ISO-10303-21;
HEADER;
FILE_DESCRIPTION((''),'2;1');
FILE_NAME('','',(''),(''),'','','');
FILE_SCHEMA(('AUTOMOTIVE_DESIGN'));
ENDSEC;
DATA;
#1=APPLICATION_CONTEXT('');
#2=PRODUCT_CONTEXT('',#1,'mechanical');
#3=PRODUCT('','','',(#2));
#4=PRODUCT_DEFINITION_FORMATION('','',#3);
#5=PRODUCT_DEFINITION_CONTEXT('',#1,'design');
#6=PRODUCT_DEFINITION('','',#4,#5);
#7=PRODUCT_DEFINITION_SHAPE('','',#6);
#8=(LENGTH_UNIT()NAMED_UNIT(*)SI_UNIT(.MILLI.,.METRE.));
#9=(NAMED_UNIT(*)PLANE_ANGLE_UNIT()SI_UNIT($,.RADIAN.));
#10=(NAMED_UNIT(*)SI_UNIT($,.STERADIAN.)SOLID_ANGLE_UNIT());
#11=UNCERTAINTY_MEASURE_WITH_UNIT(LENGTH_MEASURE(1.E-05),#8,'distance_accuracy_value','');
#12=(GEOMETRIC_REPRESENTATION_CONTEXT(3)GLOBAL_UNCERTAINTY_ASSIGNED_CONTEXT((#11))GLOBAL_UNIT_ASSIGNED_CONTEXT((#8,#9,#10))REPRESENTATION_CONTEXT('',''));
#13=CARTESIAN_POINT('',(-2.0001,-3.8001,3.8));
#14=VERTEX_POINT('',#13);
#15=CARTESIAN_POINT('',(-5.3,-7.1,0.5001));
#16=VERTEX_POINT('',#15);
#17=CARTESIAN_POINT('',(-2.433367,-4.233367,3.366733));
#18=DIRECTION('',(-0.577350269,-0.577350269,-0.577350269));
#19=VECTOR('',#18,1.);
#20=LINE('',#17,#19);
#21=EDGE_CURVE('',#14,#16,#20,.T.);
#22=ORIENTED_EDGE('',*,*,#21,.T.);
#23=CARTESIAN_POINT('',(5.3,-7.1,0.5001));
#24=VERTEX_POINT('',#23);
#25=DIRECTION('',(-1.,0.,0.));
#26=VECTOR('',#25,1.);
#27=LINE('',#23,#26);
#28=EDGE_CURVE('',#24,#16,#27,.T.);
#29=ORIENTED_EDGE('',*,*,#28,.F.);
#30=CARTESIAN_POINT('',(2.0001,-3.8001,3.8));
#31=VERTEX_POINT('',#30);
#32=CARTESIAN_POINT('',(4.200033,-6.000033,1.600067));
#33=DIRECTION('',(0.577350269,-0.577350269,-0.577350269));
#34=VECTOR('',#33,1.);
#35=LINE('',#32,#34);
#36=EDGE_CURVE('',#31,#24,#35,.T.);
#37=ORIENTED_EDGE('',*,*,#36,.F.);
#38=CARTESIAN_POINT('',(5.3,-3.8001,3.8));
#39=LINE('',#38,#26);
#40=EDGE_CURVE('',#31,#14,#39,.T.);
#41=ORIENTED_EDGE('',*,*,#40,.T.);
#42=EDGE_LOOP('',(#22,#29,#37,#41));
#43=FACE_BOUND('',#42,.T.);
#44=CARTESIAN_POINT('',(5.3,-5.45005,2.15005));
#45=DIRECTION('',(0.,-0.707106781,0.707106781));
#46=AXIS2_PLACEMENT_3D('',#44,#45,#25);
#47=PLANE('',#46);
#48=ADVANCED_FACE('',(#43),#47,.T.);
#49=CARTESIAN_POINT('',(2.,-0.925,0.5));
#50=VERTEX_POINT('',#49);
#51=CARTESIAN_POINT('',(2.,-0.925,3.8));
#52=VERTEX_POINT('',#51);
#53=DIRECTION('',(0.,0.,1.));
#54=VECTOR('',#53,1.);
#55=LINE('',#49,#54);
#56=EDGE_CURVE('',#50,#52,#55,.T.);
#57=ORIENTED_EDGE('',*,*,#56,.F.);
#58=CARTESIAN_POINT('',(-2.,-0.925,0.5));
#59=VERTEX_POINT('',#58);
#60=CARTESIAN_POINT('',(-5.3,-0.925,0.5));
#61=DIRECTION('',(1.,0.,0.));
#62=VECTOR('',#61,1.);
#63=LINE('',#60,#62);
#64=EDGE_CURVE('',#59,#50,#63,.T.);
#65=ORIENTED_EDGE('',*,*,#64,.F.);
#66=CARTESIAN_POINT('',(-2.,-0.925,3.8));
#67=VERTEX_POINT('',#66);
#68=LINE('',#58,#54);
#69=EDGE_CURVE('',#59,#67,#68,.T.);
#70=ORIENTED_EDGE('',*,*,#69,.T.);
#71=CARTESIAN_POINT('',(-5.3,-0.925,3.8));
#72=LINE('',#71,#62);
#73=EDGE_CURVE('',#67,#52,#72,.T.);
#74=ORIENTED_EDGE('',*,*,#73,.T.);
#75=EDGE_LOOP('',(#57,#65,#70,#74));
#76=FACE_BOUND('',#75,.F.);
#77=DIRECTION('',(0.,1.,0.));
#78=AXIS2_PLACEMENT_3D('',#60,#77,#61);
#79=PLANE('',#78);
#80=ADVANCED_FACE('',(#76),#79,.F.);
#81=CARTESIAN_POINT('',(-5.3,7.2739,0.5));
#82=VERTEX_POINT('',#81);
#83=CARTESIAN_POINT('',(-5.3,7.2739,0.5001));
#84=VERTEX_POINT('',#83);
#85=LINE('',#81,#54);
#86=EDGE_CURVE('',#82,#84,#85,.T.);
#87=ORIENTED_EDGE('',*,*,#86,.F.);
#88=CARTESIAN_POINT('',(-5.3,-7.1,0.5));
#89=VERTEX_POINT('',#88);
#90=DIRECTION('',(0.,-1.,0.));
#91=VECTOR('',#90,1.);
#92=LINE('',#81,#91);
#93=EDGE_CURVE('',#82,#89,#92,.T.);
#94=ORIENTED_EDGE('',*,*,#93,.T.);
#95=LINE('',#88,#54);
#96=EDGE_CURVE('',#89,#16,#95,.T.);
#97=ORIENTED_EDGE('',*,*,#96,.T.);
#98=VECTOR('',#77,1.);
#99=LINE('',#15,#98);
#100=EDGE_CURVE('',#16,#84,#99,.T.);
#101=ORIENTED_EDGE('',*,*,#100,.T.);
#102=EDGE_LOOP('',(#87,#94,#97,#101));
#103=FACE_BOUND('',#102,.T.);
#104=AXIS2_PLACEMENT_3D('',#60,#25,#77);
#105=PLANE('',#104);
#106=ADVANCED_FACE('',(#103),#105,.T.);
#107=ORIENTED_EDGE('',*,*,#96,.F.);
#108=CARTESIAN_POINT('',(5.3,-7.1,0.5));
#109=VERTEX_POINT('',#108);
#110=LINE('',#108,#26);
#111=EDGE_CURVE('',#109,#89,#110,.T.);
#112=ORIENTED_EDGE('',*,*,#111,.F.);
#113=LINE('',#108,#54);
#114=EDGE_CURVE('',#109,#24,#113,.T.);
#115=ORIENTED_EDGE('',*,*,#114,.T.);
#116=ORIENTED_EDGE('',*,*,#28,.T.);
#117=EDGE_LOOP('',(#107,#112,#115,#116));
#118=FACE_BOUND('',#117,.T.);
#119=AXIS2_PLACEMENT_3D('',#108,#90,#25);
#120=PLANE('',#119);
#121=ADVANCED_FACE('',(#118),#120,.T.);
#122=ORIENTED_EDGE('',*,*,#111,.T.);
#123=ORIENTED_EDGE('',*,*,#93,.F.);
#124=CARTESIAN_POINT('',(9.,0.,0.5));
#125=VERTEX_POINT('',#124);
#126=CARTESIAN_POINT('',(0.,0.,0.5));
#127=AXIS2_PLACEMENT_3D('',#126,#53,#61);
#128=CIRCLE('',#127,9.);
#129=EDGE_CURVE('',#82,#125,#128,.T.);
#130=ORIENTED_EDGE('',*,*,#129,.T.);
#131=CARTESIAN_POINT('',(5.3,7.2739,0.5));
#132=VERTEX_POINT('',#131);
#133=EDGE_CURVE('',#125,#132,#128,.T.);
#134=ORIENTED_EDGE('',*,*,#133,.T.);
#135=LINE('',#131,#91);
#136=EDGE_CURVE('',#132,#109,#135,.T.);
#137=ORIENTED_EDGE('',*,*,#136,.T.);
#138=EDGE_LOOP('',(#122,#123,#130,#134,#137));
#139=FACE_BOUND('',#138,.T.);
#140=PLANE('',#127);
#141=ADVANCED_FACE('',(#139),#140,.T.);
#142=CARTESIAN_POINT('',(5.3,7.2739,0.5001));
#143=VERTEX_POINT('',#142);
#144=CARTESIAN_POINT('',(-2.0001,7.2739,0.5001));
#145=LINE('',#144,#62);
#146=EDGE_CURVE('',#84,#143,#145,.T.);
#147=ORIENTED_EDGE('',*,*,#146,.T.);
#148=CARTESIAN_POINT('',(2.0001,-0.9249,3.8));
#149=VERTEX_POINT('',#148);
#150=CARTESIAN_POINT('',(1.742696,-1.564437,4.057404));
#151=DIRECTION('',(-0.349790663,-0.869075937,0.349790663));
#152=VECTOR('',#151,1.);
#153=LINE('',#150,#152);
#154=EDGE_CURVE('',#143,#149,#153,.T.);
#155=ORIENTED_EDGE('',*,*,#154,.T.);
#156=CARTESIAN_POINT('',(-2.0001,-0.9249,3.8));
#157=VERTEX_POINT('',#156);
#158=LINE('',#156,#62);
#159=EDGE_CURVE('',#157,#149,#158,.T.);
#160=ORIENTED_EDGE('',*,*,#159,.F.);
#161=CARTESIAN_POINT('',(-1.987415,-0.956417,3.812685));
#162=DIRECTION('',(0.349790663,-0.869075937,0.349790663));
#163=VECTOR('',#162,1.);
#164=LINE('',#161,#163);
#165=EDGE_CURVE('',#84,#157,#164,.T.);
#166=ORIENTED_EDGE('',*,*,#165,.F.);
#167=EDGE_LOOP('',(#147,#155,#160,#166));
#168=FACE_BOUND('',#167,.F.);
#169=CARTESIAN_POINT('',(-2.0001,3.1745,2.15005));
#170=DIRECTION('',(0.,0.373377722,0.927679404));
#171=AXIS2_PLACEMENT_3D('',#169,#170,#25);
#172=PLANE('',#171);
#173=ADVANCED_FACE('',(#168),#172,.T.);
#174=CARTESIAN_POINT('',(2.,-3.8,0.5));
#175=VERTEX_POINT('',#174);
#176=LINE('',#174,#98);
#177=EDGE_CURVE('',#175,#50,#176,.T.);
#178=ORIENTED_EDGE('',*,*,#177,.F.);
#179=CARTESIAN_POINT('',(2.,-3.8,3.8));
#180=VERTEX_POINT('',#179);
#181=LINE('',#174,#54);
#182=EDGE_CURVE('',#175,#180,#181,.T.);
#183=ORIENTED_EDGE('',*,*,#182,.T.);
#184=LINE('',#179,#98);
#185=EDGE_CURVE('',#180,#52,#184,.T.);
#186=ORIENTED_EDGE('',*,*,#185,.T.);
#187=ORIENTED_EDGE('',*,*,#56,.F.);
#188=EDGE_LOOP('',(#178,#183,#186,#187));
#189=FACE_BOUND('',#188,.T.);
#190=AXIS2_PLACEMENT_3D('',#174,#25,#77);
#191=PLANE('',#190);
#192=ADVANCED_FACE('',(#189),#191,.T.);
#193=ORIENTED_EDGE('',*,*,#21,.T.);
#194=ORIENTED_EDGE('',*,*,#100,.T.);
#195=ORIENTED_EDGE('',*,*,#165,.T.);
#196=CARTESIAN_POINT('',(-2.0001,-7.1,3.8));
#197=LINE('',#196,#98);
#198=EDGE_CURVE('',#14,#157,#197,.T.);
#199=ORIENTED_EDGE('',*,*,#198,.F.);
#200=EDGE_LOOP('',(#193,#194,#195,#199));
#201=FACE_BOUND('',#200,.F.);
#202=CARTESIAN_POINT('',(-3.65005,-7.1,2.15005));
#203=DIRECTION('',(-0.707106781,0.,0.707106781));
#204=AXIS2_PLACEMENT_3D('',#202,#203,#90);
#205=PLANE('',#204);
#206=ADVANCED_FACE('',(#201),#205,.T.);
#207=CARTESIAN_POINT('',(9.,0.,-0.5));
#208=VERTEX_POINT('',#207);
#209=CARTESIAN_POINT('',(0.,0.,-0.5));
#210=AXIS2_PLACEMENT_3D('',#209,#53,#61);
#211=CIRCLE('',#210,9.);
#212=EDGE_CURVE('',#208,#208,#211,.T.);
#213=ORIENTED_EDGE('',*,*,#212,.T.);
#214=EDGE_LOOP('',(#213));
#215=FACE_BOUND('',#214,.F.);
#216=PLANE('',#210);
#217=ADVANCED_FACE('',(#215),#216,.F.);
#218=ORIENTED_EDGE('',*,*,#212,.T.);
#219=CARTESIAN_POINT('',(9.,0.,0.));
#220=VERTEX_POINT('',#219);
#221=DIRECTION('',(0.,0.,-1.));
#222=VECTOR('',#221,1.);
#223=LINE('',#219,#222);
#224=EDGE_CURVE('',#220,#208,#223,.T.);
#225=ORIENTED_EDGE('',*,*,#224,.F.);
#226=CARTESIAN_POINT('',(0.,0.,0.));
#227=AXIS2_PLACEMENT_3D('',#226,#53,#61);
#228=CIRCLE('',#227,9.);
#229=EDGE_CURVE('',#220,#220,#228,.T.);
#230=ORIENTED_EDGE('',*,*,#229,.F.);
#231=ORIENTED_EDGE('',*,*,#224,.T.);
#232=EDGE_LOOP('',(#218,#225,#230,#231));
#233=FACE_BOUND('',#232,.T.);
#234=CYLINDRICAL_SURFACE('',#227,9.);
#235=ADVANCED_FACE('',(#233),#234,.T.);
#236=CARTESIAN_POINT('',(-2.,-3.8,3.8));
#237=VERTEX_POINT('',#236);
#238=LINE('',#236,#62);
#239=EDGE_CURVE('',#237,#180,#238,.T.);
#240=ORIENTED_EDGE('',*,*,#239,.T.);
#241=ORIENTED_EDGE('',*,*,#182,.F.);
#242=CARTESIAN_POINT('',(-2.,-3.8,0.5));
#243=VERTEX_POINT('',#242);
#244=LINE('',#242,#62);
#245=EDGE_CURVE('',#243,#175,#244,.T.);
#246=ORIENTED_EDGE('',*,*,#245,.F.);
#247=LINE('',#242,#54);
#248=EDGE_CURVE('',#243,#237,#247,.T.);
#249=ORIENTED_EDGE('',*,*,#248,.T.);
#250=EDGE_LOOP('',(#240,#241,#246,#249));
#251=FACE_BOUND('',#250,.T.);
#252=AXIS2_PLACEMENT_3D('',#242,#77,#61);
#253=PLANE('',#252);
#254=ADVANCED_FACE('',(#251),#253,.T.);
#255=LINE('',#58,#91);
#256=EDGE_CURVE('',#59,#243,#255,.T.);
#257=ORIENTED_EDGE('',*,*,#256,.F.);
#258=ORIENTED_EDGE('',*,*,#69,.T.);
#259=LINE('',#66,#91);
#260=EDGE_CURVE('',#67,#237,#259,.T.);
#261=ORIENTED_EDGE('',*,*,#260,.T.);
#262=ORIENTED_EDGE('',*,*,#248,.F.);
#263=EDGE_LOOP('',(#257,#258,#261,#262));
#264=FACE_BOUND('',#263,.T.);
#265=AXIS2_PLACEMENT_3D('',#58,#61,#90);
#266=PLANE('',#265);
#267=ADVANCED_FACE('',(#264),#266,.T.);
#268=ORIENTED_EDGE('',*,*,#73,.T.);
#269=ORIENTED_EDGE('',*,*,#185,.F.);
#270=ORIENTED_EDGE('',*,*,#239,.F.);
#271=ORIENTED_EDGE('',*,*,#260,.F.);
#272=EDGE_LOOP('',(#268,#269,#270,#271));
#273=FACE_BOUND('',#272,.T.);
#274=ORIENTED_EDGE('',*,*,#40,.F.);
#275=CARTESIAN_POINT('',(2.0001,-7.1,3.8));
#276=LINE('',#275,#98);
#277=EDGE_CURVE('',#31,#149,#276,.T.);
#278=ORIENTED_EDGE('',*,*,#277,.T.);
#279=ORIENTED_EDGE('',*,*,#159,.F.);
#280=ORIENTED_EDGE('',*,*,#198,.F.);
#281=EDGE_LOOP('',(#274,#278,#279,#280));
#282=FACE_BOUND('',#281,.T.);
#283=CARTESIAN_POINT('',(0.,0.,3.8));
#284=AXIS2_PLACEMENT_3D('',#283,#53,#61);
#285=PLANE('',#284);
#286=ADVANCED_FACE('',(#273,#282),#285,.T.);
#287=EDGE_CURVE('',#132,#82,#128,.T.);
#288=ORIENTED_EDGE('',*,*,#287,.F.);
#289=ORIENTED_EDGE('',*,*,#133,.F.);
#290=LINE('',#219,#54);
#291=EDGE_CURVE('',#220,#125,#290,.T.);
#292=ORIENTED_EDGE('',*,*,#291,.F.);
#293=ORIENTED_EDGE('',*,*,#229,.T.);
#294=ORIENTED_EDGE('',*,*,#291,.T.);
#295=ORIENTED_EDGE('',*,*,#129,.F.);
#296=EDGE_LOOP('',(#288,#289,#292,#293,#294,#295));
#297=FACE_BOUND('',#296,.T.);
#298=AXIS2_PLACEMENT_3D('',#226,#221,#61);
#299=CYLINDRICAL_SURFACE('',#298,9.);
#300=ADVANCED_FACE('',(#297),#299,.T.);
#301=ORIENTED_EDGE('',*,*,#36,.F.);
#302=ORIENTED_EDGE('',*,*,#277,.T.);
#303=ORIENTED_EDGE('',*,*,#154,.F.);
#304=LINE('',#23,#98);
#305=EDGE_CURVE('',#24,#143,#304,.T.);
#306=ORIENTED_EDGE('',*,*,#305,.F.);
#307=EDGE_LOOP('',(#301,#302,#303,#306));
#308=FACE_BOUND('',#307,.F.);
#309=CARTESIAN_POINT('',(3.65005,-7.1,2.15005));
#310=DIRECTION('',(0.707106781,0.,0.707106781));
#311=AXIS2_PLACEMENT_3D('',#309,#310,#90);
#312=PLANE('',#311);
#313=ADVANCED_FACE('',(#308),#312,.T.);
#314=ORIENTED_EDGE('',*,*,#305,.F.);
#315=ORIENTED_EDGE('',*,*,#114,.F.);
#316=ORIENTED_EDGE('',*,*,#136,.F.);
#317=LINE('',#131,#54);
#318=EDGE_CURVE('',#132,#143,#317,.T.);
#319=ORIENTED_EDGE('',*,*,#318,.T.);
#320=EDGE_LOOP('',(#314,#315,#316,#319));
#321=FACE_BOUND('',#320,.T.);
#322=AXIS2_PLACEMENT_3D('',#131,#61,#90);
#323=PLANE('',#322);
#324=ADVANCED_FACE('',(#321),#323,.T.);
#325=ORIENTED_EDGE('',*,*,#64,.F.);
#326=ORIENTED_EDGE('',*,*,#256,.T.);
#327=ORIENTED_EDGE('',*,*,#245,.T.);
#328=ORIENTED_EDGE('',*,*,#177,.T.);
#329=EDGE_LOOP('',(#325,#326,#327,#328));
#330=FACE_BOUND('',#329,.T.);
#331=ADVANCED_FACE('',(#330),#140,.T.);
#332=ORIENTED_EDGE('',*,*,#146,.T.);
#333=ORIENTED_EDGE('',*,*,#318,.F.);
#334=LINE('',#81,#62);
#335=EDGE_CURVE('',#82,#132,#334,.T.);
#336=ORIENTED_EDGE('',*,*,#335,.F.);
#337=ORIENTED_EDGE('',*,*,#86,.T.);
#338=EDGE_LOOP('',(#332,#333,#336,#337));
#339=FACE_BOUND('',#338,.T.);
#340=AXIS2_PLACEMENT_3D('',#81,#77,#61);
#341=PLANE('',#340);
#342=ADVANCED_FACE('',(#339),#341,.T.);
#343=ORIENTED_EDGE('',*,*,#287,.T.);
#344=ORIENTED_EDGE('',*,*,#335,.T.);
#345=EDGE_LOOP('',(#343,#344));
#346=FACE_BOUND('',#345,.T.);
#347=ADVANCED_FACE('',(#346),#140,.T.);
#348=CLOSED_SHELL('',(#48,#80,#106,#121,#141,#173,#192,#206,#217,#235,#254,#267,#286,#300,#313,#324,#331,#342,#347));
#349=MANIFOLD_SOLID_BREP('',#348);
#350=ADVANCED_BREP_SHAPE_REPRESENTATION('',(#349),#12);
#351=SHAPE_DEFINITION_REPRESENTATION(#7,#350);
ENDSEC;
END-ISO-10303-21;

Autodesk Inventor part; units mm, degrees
ref_plane "YZ Plane" through (0, 0, 0) normal (1, 0, 0) x (0, 1, 0)
ref_plane "XZ Plane" through (0, 0, 0) normal (0, 1, 0) x (-1, 0, 0)
sketch "Skizze1" plane through (0, 0, 0) normal (0, 0, 1) x (1, 0, 0)
  circle A0 centre (0, 0) radius 9
  dimension "d0" = 18
extrude "Extrusion1" add sketch "Skizze1" along normal mid plane 1
sketch "Skizze2" plane through (0, 0, 0.5) normal (0, 0, 1) x (1, 0, 0)
  line L0 (-5.3, -0.925) -> (-2, -0.925)
  line L1 (-2, -0.925) -> (-2, -3.8)
  line L2 (-2, -3.8) -> (2, -3.8)
  line L3 (2, -3.8) -> (2, -0.925)
  line L4 (2, -0.925) -> (5.3, -0.925)
  line L5 (5.3, -0.925) -> (5.3, -7.1)
  line L6 (5.3, -7.1) -> (-5.3, -7.1)
  line L7 (-5.3, -7.1) -> (-5.3, -0.925)
  point P0 (0, 0)
  point P1 (0, -3.8)
  dimension "d3" = 4
  dimension "d4" = 2.875
  dimension "d5" = 3.3
  dimension "d6" = 3.3
  dimension "d17" = 3.8
extrude "Extrusion3" add sketch "Skizze2" along normal blind 3.3
ref_plane "Arbeitsebene3" through (0, 0, 0.5) normal (0, 0, 1) x (1, 0, 0)
sketch "Skizze5" plane through (0, 0, 0.5) normal (0, 0, 1) x (1, 0, 0)
  line L0 (-2, -0.925) -> (-2, -3.8) construction
  line L1 (-2, -3.8) -> (2, -3.8) construction
  line L2 (2, -3.8) -> (2, -0.925) construction
  line L3 (2, -0.925) -> (5.3, -0.925) construction
  line L4 (5.3, -0.925) -> (5.3, -7.1) construction
  line L5 (5.3, -7.1) -> (-5.3, -7.1) construction
  line L6 (-5.3, -7.1) -> (-5.3, -0.925) construction
  line L7 (-5.3, -0.925) -> (-2, -0.925) construction
  circle A0 centre (0, 0) radius 9 construction
  line L8 (-5.3, -0.925) -> (-5.3, 7.2739)
  line L9 (-5.3, 7.2739) -> (5.3, 7.2739)
  circle A1 centre (0, 0) radius 9 projected
  line L10 (5.3, 7.2739) -> (5.3, -0.925)
  line L11 (-5.3, -0.925) -> (5.3, -0.925)
  dimension "d26" = 8.1989
extrude "Extrusion4" add sketch "Skizze5" along normal up to surface (3.3 mm away) contours L8 L9 L10 L11
chamfer "Fase1" distance 3.3 angle 45 3 edges at (0, -7.1, 3.8) (5.3, 0.087, 3.8) (-5.3, 0.087, 3.8)
chamfer "Fase2" distance 3.3 distance2 8.1989 1 edges at (0, 7.2739, 3.8) measured on face at (0.6667, 7.2739, 1.6)
equation "\"d6\" = d5"
equation "\"d28\" = d26"
properties part number "Membran_Platte" material "Stahl"
